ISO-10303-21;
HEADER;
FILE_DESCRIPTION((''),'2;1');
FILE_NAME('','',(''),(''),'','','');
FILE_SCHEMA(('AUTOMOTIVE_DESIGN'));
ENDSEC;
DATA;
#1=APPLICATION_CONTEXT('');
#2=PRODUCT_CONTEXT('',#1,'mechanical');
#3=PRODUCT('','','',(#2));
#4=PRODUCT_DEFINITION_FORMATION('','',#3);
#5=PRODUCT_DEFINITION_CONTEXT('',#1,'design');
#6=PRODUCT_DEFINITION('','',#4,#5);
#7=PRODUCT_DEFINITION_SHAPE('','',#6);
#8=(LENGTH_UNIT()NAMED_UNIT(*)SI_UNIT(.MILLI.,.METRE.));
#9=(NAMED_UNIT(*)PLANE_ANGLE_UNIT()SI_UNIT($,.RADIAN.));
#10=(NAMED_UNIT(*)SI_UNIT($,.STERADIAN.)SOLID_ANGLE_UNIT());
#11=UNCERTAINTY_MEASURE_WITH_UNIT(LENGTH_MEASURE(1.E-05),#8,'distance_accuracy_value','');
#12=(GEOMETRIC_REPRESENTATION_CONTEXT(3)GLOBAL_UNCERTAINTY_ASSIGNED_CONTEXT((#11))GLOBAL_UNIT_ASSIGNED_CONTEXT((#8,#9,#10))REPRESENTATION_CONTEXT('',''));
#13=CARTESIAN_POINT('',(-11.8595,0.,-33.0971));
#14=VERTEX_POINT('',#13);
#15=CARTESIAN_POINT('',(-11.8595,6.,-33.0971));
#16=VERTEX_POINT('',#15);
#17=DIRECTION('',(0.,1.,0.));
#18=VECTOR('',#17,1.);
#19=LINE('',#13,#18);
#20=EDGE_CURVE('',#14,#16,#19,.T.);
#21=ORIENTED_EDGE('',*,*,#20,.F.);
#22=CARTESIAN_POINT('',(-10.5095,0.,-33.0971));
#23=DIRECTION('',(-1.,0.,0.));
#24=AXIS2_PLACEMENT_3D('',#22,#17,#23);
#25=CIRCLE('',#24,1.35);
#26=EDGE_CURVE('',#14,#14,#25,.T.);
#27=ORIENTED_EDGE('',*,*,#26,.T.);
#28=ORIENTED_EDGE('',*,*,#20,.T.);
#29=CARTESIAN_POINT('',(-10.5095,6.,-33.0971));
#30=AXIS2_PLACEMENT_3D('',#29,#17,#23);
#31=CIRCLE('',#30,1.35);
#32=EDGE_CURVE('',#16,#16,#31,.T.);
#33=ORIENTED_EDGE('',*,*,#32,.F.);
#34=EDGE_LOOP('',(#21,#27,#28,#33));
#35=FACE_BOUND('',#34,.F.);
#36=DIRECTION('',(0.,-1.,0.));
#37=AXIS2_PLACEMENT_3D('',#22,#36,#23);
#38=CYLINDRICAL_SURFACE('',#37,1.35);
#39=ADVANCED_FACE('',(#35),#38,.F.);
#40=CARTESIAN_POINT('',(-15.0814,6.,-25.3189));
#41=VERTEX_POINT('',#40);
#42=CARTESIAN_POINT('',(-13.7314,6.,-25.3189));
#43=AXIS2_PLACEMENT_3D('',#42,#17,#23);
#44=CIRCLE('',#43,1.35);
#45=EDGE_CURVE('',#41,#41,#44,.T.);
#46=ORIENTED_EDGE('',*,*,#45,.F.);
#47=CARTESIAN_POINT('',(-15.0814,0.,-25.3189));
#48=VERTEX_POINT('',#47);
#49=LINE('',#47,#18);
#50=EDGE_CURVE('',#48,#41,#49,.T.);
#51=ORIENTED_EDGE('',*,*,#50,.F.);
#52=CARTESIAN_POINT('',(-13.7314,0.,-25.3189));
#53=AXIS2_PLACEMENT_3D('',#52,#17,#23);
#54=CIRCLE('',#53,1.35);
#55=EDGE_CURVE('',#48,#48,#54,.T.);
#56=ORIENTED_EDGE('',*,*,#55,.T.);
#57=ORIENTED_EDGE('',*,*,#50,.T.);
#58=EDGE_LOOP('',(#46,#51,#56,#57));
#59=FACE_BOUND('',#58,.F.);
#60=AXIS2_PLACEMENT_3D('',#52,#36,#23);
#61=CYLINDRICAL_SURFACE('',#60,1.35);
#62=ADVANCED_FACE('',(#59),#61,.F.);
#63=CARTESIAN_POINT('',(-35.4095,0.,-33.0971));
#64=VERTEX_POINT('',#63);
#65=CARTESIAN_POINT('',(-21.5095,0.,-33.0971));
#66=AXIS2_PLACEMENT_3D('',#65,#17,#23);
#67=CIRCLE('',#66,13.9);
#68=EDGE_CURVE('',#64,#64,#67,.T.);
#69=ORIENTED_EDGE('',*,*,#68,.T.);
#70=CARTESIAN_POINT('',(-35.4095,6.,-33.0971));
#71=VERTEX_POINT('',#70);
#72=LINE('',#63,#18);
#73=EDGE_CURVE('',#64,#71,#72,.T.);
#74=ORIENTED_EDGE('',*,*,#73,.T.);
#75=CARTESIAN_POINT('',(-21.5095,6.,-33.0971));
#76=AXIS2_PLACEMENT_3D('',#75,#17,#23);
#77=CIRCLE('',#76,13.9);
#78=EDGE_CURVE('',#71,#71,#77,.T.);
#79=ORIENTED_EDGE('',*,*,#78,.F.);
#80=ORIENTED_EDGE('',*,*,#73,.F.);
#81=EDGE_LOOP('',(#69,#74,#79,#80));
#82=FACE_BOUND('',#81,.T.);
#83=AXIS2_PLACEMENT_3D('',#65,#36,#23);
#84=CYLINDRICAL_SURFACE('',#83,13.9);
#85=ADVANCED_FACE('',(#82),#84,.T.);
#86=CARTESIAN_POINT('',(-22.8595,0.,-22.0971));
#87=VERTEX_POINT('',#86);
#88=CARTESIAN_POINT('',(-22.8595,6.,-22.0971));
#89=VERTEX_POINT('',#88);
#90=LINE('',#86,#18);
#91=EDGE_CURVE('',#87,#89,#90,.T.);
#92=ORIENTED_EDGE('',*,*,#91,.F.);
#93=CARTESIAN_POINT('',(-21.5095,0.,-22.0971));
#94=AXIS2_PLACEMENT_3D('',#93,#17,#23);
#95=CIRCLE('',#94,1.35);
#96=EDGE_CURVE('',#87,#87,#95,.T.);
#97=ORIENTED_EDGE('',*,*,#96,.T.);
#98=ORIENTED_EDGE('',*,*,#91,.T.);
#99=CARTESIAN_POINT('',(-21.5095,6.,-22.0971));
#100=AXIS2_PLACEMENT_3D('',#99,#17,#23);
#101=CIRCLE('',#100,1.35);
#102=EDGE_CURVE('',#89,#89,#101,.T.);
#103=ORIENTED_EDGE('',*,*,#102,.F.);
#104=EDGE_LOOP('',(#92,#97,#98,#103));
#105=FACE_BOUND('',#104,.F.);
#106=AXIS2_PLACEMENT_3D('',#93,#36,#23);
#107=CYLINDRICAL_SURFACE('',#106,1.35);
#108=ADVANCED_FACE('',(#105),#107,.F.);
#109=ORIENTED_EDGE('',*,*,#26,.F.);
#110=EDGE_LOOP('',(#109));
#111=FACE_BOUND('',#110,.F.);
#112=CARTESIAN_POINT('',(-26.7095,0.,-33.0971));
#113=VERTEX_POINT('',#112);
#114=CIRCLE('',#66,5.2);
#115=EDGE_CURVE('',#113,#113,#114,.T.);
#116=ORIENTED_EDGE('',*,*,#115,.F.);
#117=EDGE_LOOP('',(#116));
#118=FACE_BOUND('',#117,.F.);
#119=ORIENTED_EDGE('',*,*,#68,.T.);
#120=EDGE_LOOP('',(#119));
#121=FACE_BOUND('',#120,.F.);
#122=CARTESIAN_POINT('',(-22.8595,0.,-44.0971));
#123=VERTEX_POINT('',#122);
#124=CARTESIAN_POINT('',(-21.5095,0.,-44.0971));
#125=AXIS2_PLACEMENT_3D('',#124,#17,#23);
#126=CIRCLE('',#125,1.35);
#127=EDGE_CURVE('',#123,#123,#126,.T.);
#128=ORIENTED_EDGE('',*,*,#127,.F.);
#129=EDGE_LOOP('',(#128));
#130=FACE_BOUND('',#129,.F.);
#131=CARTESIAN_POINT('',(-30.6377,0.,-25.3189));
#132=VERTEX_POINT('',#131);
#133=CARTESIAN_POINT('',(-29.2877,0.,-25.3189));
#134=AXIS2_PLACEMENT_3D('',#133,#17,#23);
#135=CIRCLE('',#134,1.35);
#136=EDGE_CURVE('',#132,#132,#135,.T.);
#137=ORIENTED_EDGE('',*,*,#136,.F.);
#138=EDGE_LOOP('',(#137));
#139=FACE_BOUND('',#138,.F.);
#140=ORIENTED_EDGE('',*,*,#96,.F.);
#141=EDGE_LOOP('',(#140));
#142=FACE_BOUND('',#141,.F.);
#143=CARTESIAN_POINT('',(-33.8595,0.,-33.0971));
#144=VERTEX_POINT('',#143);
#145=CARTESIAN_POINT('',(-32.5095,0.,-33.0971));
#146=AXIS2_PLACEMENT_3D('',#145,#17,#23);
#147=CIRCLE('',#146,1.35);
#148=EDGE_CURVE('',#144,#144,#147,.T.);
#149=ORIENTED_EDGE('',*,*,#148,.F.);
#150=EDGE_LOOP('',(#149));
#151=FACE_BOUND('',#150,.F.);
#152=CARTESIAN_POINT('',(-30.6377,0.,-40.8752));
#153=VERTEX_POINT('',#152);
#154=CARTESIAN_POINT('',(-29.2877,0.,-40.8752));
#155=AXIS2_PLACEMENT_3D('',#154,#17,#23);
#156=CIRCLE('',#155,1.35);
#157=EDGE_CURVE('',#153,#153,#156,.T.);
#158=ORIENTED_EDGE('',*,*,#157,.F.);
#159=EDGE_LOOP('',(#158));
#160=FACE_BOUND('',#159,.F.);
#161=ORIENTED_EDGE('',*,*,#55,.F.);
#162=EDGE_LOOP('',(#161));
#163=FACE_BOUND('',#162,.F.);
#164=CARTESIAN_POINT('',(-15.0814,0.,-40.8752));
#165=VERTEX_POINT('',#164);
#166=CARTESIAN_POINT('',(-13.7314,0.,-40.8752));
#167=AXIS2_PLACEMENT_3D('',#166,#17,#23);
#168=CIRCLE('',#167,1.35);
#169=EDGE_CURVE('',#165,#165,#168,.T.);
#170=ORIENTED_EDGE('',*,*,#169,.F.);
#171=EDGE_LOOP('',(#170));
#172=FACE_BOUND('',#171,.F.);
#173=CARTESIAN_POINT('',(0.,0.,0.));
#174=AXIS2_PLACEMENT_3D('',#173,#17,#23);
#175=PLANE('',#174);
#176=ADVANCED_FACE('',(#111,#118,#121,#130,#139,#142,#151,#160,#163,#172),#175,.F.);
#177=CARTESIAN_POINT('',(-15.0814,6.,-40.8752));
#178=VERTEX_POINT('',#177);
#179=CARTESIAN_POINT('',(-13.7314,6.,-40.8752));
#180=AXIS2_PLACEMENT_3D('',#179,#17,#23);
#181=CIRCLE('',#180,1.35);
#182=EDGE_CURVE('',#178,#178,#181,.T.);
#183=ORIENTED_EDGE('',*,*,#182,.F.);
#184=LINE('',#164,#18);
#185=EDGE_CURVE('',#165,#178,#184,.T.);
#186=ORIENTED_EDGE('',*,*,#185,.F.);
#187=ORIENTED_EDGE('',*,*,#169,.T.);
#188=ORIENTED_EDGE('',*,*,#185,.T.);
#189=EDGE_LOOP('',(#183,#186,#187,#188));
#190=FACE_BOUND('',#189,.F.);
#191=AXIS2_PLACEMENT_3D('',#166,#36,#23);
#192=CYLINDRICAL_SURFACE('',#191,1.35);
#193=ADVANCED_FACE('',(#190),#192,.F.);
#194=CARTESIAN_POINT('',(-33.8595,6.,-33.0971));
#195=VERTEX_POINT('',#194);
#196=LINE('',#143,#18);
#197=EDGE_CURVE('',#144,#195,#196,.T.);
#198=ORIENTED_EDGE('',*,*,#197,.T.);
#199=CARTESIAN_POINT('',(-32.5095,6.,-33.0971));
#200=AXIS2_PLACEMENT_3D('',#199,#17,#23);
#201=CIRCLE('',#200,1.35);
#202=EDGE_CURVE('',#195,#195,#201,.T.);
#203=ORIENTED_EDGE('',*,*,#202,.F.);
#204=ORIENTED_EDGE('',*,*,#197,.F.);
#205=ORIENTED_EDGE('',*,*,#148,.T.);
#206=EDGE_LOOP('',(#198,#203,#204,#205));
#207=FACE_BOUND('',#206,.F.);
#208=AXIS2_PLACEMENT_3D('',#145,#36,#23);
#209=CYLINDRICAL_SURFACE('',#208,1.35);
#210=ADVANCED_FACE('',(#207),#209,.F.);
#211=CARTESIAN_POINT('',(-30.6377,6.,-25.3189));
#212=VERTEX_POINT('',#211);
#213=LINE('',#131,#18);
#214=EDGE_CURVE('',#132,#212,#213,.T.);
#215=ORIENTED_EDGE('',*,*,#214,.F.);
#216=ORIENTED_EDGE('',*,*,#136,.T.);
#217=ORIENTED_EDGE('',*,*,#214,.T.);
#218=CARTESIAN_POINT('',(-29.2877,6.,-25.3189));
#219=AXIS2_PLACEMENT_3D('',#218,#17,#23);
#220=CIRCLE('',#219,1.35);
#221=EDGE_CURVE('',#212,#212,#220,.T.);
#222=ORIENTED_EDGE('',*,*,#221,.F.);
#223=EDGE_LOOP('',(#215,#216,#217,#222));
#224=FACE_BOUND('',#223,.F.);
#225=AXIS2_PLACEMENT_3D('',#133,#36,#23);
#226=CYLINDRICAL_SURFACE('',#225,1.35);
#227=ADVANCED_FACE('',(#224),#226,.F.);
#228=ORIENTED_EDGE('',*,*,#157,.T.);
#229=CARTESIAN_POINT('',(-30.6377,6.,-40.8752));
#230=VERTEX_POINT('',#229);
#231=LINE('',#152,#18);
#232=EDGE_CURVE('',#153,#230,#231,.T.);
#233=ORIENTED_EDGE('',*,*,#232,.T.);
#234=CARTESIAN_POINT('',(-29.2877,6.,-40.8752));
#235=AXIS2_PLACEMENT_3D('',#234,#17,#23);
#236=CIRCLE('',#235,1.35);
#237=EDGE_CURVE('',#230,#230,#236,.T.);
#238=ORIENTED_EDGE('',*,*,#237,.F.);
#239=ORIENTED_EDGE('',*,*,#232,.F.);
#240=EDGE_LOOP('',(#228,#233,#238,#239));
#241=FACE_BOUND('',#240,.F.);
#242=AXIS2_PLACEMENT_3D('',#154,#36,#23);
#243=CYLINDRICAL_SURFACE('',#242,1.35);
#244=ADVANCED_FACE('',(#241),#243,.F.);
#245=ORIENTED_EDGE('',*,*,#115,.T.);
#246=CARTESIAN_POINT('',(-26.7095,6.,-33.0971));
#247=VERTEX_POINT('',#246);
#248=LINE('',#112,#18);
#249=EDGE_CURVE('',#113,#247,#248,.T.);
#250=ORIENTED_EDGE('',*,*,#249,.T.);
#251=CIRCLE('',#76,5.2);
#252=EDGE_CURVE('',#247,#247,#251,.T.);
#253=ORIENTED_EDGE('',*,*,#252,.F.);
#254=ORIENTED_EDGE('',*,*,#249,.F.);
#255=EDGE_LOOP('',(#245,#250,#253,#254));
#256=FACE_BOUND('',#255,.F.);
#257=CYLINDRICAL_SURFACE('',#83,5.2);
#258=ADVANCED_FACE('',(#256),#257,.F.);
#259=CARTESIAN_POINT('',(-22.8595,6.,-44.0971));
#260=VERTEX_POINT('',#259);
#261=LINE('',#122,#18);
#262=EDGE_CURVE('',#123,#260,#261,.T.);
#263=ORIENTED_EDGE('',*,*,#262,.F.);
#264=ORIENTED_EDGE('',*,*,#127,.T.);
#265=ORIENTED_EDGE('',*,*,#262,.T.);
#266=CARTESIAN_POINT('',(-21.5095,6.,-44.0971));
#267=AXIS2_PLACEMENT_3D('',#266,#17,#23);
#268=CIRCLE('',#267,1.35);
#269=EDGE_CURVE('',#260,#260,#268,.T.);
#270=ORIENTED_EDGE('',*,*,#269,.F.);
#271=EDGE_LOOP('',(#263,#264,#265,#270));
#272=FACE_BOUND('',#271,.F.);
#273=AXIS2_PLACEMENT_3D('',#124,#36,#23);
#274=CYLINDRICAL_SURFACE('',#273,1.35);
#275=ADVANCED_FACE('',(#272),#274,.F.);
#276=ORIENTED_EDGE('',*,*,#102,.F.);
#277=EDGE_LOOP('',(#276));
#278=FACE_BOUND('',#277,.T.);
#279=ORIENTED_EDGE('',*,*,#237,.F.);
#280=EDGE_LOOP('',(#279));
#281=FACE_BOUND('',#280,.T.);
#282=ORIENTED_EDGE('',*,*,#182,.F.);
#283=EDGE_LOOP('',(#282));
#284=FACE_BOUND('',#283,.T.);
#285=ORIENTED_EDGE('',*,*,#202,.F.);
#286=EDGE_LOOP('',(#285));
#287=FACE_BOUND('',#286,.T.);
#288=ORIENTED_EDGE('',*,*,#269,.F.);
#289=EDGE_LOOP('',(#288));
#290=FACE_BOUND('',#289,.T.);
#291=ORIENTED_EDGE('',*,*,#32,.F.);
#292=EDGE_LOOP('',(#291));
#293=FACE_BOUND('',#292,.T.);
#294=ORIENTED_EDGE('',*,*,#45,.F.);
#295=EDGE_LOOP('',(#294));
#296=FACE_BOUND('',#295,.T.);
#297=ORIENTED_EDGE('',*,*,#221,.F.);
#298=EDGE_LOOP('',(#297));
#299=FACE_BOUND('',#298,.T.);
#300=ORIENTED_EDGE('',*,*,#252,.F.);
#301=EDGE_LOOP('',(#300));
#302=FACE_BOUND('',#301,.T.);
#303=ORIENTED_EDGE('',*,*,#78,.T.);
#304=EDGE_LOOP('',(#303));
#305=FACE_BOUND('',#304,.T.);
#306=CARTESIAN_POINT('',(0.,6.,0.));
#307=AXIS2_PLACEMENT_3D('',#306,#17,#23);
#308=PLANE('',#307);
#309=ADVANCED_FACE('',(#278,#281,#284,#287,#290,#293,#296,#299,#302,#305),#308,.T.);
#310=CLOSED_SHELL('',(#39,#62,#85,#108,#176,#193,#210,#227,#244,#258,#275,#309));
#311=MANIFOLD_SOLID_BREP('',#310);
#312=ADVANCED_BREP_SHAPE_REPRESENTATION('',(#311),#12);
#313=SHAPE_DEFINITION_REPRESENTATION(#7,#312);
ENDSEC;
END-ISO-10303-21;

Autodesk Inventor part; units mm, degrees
ref_plane "YZ Plane" through (0, 0, 0) normal (1, 0, 0) x (0, 1, 0)
ref_plane "XZ Plane" through (0, 0, 0) normal (0, 1, 0) x (-1, 0, 0)
ref_plane "XY Plane" through (0, 0, 0) normal (0, 0, 1) x (1, 0, 0)
sketch "스케치1" plane through (0, 0, 0) normal (0, 1, 0) x (-1, 0, 0)
  circle A0 centre (13.7314, -40.8752) radius 1.55
  circle A1 centre (29.2877, -40.8752) radius 1.55
  circle A2 centre (29.2877, -25.3189) radius 1.55
  circle A3 centre (13.7314, -25.3189) radius 1.55
  circle A4 centre (21.5095, -33.0971) radius 13.9
  circle A5 centre (21.5095, -22.0971) radius 1.55
  circle A6 centre (32.5095, -33.0971) radius 1.55
  circle A7 centre (21.5095, -44.0971) radius 1.55
  circle A8 centre (10.5095, -33.0971) radius 1.55
  circle A9 centre (21.5095, -33.0971) radius 5.2
  circle A10 centre (29.2877, -40.8752) radius 1.35
  circle A11 centre (21.5095, -44.0971) radius 1.35
  circle A12 centre (13.7314, -40.8752) radius 1.35
  circle A13 centre (10.5095, -33.0971) radius 1.35
  circle A14 centre (13.7314, -25.3189) radius 1.35
  circle A15 centre (21.5095, -22.0971) radius 1.35
  circle A16 centre (29.2877, -25.3189) radius 1.35
  circle A17 centre (32.5095, -33.0971) radius 1.35
  point P0 (0, 0)
  point P1 (21.5095, -33.0971)
  dimension "d3" = 2.7
  dimension "d4" = 2.7
  dimension "d5" = 2.7
  dimension "d6" = 2.7
  dimension "d7" = 2.7
  dimension "d8" = 2.7
  dimension "d9" = 2.7
  dimension "d10" = 2.7
extrude "돌출1" add sketch "스케치1" along normal blind 6 contours A0 | A1 | A2 | A3 | A4 | A5 | A6 | A7 | A8
properties part number "long_horn1" material "PMMA 플라스틱"
